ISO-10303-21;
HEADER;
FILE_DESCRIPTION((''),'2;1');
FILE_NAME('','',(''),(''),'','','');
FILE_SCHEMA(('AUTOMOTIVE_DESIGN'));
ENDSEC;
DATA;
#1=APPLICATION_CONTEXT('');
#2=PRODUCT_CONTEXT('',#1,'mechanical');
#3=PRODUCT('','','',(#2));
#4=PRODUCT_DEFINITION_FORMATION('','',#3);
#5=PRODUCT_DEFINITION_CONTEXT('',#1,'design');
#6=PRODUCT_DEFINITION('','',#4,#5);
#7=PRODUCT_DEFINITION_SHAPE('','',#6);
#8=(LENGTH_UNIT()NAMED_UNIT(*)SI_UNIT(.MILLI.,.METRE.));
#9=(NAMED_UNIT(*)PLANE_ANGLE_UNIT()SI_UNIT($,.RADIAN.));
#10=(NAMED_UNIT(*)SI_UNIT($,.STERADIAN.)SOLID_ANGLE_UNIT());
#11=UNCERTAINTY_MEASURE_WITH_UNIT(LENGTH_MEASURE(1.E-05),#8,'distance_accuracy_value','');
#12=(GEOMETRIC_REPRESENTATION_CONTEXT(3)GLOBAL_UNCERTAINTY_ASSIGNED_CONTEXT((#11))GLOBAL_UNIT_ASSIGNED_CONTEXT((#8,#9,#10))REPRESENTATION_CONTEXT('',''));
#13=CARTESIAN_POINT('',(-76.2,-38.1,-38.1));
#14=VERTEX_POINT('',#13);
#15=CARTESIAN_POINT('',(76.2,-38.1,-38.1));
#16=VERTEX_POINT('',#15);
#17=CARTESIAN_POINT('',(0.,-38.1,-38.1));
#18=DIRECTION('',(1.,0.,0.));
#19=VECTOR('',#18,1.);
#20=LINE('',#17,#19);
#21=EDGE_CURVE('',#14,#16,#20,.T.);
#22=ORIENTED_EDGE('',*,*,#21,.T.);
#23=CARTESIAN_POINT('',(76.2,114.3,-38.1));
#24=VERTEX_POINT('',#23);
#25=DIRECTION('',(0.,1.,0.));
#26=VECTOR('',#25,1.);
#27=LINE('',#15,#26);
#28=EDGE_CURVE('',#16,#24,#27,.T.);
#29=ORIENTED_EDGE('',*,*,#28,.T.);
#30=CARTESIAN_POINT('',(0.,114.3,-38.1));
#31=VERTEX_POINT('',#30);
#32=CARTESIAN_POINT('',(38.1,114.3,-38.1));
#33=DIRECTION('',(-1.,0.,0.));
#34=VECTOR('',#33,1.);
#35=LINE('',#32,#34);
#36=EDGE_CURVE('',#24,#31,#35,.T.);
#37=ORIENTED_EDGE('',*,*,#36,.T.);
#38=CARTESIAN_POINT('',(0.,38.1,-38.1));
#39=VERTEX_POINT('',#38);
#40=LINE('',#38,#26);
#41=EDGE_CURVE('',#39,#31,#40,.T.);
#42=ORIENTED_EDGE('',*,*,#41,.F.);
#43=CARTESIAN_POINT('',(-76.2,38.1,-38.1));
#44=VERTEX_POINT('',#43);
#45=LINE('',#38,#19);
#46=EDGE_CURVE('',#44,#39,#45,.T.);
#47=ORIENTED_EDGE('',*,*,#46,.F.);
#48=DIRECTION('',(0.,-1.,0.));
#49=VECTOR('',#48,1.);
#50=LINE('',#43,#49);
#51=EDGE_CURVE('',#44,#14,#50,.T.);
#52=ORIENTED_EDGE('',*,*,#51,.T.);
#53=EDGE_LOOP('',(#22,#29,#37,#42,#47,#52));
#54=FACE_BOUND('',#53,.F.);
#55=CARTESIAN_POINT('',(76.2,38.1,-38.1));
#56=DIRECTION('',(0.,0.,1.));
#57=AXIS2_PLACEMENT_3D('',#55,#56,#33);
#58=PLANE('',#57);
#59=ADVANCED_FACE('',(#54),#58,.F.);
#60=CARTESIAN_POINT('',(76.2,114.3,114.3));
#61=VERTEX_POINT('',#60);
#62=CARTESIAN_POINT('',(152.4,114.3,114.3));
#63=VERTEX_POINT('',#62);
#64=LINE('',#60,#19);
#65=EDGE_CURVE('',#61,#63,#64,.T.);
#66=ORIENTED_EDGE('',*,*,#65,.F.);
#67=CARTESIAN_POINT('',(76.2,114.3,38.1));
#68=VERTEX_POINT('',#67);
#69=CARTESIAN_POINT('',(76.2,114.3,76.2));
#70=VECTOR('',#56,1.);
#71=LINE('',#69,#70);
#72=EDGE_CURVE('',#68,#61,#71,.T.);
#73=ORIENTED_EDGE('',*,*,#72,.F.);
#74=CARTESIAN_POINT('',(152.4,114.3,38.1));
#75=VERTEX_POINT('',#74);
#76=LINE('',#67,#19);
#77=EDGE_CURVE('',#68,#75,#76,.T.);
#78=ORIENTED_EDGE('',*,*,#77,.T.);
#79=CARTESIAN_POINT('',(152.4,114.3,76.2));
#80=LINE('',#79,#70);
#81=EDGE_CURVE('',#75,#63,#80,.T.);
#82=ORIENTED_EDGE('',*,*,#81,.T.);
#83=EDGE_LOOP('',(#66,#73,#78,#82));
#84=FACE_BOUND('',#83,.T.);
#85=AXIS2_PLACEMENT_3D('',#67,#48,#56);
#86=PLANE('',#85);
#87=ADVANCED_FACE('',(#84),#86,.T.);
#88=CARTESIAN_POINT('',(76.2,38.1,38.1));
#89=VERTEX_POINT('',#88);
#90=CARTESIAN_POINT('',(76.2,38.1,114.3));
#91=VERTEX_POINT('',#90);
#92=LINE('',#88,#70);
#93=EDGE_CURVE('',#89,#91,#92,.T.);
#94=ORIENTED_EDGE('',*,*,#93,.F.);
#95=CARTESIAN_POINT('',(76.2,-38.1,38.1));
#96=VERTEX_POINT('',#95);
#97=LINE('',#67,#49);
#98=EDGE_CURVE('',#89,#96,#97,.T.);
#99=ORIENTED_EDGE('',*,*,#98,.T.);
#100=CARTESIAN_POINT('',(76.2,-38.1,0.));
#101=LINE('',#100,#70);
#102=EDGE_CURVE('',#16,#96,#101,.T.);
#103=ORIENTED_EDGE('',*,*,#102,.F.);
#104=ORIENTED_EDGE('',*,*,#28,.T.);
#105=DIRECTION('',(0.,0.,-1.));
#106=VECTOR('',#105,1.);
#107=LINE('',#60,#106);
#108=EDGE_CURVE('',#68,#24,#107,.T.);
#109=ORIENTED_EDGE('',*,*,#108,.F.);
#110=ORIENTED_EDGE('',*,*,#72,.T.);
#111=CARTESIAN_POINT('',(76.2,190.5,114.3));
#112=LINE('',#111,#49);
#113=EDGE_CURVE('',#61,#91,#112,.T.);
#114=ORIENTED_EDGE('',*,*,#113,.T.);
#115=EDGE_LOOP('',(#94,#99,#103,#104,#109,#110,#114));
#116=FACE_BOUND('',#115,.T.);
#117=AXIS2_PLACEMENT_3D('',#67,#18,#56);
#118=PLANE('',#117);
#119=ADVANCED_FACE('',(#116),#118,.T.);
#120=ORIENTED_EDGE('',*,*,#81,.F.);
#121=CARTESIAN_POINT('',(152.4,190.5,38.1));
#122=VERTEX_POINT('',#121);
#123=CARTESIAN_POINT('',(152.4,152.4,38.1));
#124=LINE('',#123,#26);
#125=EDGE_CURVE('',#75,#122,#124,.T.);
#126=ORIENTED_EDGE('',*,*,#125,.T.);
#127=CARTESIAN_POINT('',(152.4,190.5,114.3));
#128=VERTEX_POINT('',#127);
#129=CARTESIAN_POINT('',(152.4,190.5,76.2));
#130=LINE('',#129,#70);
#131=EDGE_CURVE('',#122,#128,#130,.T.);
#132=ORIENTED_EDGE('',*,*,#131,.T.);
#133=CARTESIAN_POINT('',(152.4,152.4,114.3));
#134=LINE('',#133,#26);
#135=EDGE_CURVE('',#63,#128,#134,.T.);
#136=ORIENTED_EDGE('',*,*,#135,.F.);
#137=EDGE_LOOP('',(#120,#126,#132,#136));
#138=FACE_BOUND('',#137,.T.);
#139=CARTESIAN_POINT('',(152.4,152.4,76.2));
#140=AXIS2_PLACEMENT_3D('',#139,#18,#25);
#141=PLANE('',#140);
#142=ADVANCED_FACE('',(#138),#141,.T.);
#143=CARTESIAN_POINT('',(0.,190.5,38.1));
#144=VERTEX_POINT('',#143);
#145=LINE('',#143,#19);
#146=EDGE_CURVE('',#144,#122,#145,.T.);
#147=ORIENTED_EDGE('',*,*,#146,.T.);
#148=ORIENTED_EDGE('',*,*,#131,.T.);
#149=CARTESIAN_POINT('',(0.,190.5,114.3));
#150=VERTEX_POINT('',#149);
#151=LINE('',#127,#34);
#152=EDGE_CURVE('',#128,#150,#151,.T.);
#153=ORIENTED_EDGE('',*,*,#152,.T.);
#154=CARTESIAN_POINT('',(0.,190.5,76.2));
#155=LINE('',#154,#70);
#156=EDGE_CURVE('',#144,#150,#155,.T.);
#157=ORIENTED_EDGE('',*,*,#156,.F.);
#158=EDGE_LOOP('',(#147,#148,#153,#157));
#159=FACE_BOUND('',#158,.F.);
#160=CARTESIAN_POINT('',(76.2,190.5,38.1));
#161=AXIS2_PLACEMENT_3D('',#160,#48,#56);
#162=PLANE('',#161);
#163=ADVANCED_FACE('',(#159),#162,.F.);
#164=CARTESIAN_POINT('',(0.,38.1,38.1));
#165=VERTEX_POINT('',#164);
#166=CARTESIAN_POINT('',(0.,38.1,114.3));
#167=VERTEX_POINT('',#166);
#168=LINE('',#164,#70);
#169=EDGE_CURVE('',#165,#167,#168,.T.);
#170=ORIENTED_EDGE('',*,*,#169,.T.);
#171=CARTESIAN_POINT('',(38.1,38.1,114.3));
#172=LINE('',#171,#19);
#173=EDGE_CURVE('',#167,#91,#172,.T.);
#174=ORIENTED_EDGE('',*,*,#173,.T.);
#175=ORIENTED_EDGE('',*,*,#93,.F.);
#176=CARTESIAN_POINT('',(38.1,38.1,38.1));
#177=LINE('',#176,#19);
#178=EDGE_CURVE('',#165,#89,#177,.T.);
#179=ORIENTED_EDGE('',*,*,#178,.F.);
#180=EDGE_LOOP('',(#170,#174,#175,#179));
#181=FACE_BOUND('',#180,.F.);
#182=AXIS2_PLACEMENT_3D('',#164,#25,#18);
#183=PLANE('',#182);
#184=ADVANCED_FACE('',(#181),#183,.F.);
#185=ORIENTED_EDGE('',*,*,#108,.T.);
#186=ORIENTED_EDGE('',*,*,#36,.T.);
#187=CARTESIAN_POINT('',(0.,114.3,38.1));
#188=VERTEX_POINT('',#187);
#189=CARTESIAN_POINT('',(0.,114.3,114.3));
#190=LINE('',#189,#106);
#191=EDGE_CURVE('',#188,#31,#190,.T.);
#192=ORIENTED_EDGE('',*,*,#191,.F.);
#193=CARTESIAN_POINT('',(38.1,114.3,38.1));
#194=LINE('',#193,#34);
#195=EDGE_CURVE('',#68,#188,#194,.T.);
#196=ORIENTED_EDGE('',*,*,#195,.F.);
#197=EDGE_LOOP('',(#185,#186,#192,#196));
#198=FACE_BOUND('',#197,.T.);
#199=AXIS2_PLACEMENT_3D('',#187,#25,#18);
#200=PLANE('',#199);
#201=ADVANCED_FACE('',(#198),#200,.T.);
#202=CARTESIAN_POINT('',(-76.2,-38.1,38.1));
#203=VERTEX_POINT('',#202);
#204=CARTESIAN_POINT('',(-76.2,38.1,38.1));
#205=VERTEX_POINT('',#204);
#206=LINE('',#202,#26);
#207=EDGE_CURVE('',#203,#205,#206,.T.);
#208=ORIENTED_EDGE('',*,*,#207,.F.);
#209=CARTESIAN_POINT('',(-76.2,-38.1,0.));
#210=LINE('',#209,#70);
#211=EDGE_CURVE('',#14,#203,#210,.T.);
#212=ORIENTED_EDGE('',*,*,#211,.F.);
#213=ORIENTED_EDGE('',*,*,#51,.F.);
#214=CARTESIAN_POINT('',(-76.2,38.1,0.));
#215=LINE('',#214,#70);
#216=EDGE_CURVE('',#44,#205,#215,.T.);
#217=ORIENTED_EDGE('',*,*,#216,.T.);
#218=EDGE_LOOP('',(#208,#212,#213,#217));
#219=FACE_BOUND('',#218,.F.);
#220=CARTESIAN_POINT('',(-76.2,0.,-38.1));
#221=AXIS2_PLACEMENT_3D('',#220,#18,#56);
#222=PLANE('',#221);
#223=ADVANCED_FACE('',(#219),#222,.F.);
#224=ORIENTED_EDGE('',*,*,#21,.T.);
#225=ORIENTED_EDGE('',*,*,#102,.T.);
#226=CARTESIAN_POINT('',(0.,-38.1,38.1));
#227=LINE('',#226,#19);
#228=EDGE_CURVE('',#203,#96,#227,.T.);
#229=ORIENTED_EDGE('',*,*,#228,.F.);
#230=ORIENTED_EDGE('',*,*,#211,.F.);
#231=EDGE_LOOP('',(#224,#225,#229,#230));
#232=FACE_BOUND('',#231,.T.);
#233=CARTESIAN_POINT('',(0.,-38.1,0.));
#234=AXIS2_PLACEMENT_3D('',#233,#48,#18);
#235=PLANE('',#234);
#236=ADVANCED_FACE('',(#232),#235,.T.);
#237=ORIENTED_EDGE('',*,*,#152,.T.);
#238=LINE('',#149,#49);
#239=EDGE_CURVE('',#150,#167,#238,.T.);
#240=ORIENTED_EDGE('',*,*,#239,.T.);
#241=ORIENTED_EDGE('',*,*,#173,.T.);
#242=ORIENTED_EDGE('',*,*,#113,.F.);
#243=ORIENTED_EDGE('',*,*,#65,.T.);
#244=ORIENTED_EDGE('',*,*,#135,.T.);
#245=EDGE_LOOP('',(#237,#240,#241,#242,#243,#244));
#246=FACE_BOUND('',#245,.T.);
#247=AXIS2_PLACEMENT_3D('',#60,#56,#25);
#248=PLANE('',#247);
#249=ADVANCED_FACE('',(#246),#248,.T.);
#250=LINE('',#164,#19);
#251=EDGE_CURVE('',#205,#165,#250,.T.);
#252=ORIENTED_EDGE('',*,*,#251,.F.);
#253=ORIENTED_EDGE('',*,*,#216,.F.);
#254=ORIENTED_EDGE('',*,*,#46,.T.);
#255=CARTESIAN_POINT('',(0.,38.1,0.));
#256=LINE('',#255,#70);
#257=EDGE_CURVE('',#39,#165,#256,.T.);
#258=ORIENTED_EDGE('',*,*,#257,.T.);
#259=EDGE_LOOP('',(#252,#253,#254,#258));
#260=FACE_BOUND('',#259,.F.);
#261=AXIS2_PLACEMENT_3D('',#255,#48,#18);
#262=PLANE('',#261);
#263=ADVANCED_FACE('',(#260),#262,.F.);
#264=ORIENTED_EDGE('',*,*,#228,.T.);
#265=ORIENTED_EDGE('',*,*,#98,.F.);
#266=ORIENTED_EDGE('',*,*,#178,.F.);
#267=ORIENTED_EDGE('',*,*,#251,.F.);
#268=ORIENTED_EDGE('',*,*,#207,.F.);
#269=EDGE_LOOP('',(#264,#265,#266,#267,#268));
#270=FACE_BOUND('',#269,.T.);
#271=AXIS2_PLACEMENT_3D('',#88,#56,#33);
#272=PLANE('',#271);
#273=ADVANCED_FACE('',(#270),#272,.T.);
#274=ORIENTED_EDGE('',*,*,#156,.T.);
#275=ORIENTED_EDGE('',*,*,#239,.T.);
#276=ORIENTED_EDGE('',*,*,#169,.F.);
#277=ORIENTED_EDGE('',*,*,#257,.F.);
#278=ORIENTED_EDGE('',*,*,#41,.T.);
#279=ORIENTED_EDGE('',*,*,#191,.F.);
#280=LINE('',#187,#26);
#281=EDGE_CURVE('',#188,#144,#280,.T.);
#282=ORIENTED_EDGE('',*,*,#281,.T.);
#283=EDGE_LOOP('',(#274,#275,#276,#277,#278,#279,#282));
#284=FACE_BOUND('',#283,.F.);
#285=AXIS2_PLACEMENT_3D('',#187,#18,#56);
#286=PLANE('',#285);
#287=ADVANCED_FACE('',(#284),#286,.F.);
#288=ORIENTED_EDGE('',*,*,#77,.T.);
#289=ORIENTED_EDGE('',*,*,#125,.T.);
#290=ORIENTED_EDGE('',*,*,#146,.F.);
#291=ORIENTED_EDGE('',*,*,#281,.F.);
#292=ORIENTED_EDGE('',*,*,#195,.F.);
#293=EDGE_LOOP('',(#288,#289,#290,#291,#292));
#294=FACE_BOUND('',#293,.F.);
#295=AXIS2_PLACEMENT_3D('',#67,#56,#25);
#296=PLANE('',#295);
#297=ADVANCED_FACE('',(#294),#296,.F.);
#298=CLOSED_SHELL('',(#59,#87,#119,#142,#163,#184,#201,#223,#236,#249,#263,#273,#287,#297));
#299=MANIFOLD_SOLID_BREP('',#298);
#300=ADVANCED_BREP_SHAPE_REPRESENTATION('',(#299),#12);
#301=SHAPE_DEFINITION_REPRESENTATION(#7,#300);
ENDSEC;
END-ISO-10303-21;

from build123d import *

# Parameters (mm, degrees)
F1_W      = 152.4
F1_H      = 76.2
F2_DEPTH  = 38.1
F3_W      = 76.2
F3_H      = 76.2
F4_DEPTH  = 76.2
F5_W      = 76.2
F5_H      = 76.2
F6_DEPTH  = 76.2
F7_W      = 76.2
F7_H      = 76.2
F8_DEPTH  = 76.2
F9_W      = 76.2
F9_H      = 76.2
F10_DEPTH = 76.2


# Not quite as in the source:
# - a variable given as a bare number and used for a length is read in inches; the dataset says mm whatever the document's units were


with BuildPart() as f2:
    # F1 (on Front) → F2 (new body, symmetric)
    with BuildSketch(Plane.XZ):
        Rectangle(F1_W, F1_H)
    extrude(amount=F2_DEPTH, both=True)

    # F3 (on face) → F4 (join)
    with BuildSketch(Plane(origin=(0, 38.1, 0), x_dir=(-1, 0, 0), z_dir=(0, 1, 0))):
        with Locations((-38.1, 0)):
            Rectangle(F3_W, F3_H)
    extrude(amount=F4_DEPTH)

    # F5 (on face) → F6 (join)
    with BuildSketch(Plane.XY.offset(38.1)):
        with Locations((38.1, 76.2)):
            Rectangle(F5_W, F5_H)
    extrude(amount=F6_DEPTH)

    # F7 (on face) → F8 (join)
    with BuildSketch(Plane(origin=(0, 114.3, 0), x_dir=(-1, 0, 0), z_dir=(0, 1, 0))):
        with Locations((-38.1, 76.2)):
            Rectangle(F7_W, F7_H)
    extrude(amount=F8_DEPTH)

    # F9 (on face) → F10 (join)
    with BuildSketch(Plane.YZ.offset(76.2)):
        with Locations((152.4, 76.2)):
            Rectangle(F9_W, F9_H)
    extrude(amount=F10_DEPTH)


solid = f2.part
